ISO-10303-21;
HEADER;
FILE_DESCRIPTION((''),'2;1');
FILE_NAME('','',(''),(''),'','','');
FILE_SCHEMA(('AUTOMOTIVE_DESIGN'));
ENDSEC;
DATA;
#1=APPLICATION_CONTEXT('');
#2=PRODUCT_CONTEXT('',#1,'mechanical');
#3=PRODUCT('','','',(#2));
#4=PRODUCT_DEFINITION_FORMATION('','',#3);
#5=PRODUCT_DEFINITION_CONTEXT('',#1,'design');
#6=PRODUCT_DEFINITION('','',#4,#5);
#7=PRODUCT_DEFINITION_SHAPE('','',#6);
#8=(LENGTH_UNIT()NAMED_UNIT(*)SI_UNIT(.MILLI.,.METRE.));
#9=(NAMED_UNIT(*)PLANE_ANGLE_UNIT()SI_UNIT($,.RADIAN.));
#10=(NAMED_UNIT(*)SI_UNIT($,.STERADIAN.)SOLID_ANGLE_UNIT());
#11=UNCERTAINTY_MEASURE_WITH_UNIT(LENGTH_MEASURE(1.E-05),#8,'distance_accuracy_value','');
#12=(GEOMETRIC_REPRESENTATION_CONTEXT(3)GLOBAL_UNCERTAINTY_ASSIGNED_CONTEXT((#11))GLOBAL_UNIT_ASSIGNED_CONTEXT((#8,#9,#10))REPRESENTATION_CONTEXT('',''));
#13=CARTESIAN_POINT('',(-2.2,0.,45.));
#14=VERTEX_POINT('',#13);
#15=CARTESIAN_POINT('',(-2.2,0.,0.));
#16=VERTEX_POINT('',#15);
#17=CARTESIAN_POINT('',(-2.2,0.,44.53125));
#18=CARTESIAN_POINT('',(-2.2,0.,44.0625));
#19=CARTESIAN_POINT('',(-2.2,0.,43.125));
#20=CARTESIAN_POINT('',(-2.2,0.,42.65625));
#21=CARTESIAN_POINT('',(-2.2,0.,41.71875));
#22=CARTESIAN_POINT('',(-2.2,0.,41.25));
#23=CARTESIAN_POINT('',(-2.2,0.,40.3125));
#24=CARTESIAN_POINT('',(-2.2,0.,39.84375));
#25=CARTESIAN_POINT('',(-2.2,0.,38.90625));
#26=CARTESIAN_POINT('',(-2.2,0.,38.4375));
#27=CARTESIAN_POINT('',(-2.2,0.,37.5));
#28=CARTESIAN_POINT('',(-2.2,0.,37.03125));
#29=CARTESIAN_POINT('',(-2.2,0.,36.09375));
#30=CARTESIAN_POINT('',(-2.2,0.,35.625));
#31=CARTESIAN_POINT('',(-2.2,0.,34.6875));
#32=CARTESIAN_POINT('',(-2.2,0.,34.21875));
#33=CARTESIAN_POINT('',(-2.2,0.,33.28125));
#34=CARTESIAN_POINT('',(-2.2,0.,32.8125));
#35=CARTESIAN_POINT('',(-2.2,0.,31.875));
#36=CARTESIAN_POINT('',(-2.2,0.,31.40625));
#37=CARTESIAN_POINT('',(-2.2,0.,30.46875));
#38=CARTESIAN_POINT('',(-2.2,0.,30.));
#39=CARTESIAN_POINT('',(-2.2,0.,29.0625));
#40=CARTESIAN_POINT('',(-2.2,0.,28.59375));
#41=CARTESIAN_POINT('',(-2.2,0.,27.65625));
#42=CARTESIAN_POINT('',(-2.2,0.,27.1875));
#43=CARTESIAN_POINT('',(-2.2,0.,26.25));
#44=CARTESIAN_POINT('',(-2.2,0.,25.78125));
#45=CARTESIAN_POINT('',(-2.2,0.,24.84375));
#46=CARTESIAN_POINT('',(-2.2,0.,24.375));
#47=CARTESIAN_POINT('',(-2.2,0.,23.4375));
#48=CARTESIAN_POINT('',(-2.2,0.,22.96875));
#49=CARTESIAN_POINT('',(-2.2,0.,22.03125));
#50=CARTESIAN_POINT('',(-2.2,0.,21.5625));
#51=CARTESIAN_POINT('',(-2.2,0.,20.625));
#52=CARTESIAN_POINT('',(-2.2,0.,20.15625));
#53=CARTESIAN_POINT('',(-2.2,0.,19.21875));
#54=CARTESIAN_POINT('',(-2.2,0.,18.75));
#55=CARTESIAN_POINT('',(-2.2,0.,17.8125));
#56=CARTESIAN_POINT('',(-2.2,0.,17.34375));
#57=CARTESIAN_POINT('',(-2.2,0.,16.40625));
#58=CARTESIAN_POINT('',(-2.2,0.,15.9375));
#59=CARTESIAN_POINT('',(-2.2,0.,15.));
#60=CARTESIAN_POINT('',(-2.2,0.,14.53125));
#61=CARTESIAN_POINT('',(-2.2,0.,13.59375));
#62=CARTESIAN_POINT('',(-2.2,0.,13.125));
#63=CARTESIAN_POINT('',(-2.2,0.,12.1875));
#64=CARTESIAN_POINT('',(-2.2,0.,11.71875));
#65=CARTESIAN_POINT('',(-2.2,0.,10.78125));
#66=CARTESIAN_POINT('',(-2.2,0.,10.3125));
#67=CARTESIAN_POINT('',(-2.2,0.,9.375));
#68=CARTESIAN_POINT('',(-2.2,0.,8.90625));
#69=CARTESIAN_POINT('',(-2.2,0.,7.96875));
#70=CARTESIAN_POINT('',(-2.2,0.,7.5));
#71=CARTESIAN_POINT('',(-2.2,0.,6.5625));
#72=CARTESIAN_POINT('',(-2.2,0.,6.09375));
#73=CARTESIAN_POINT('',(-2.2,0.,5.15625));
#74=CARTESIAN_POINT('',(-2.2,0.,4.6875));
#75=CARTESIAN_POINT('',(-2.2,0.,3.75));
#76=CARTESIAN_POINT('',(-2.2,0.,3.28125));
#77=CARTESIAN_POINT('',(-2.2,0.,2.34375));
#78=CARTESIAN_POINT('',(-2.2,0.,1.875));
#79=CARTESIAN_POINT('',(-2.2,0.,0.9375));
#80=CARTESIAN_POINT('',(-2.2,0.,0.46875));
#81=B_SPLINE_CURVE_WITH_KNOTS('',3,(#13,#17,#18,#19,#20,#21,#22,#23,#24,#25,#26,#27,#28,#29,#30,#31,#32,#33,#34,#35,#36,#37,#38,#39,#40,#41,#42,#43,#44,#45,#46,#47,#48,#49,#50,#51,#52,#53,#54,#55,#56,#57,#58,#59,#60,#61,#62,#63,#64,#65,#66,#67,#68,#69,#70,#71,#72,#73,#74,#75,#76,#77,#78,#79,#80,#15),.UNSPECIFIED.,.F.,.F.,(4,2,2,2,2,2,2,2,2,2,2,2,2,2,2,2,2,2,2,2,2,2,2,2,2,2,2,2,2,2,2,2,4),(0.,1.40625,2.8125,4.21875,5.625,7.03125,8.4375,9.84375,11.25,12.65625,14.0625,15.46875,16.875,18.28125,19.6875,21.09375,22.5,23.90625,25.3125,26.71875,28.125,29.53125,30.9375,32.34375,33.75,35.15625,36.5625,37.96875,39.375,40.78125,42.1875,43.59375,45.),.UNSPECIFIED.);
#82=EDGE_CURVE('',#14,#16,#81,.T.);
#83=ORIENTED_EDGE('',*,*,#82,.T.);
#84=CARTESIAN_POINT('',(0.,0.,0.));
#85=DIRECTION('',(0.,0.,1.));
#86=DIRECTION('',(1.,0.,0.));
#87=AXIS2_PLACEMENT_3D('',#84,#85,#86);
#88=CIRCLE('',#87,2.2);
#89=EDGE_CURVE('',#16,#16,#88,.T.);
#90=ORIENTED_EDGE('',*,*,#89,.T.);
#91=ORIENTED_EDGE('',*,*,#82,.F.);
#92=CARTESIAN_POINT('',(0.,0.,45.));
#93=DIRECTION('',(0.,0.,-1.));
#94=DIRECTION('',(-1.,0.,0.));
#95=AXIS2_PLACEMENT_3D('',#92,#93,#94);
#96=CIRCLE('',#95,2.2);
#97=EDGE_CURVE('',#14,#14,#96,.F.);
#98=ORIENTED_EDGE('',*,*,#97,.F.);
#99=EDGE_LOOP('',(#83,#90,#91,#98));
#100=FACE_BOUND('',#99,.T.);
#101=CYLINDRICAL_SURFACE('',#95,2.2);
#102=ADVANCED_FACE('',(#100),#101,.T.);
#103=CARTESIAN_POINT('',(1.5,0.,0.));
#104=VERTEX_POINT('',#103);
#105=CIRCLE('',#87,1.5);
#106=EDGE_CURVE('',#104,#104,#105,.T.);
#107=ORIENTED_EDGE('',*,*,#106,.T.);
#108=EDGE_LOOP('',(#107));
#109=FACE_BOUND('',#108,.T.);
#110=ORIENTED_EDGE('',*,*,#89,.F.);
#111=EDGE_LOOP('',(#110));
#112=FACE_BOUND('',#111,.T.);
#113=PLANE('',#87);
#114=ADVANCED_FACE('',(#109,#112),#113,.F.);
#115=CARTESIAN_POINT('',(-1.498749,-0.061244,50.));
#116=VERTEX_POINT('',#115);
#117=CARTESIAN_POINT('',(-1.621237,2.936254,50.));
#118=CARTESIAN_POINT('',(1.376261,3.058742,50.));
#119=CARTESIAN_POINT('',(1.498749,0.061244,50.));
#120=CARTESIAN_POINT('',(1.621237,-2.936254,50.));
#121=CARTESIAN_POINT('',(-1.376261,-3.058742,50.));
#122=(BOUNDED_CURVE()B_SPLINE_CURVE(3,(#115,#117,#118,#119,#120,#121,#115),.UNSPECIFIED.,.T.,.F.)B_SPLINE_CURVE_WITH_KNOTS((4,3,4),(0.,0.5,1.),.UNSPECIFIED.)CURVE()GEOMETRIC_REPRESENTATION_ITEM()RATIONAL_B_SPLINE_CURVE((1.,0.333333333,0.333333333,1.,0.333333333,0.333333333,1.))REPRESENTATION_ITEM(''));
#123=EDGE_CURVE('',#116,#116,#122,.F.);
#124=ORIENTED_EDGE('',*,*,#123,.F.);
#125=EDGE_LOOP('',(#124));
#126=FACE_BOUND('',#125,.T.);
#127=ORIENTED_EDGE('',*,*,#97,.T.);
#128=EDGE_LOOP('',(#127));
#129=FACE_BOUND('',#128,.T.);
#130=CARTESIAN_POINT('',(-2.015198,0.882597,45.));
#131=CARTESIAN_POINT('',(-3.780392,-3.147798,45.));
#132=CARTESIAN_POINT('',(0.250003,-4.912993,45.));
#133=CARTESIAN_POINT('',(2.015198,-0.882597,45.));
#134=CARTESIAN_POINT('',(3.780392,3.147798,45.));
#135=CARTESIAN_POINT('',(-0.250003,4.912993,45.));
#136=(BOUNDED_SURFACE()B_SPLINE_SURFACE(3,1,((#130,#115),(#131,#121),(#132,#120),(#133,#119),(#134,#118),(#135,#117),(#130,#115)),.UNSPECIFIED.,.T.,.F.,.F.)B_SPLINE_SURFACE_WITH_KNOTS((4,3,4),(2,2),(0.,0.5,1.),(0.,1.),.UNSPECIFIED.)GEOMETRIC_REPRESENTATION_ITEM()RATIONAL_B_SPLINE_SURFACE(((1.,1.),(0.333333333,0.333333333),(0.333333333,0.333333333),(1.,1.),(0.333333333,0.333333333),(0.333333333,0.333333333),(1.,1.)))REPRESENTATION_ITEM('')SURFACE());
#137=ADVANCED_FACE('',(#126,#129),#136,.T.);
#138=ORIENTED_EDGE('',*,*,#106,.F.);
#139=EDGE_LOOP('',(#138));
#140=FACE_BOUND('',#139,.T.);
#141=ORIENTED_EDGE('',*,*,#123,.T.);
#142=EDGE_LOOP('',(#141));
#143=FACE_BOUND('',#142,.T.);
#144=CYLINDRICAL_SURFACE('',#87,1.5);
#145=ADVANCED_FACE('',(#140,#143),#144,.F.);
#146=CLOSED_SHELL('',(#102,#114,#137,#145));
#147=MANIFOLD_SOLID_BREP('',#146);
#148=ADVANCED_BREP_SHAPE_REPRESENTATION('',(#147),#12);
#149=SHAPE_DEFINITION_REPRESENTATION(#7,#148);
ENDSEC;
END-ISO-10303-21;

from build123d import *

# Parameters (mm, degrees)
SKETCH1_R           = 2.2
BOSS_EXTRUDE1_DEPTH = 45
SKETCH4_R           = 1.5
CUT_EXTRUDE1_DEPTH  = 51.096706487


with BuildPart() as part:
    # Sketch1 → Boss-Extrude1 (new body)
    with BuildSketch(Plane.XY):
        with Locations(Location((0, 0, 0), (0, 0, 180))):
            Circle(SKETCH1_R)
    extrude(amount=BOSS_EXTRUDE1_DEPTH)

    # Loft1: read off the stored shape, not the designer's step
    # Loft1: loft between two sections, ruled curve by curve
    loft1_from = [
        Edge.make_bspline([(-2.015197815, 0.88259717, 45), (-3.780392156, -3.14779846, 45), (0.250003475, -4.912992801, 45), (2.015197815, -0.88259717, 45), (3.780392156, 3.14779846, 45), (-0.250003475, 4.912992801, 45), (-2.015197815, 0.88259717, 45)], [0, 0, 0, 0, 0.5, 0.5, 0.5, 1, 1, 1, 1], 3, [1, 0.333333333, 0.333333333, 1, 0.333333333, 0.333333333, 1]),
    ]
    loft1_to = [
        Edge.make_bspline([(-1.498749202, -0.061244028, 50), (-1.376261146, -3.058742431, 50), (1.621237257, -2.936254375, 50), (1.498749202, 0.061244028, 50), (1.376261146, 3.058742431, 50), (-1.621237257, 2.936254375, 50), (-1.498749202, -0.061244028, 50)], [0, 0, 0, 0, 0.5, 0.5, 0.5, 1, 1, 1, 1], 3, [1, 0.333333333, 0.333333333, 1, 0.333333333, 0.333333333, 1]),
    ]
    loft1 = Solid(Shell([*[Face.make_surface_from_curves(loft1_from[k], loft1_to[k]) for k in range(1)], Face(Wire(loft1_from)), Face(Wire(loft1_to))]))
    add(loft1)

    # Sketch4 → Cut-Extrude1 (cut, through all)
    with BuildSketch(Plane.XY.offset(50)):
        Circle(SKETCH4_R)
    extrude(amount=-CUT_EXTRUDE1_DEPTH, mode=Mode.SUBTRACT)


solid = part.part
